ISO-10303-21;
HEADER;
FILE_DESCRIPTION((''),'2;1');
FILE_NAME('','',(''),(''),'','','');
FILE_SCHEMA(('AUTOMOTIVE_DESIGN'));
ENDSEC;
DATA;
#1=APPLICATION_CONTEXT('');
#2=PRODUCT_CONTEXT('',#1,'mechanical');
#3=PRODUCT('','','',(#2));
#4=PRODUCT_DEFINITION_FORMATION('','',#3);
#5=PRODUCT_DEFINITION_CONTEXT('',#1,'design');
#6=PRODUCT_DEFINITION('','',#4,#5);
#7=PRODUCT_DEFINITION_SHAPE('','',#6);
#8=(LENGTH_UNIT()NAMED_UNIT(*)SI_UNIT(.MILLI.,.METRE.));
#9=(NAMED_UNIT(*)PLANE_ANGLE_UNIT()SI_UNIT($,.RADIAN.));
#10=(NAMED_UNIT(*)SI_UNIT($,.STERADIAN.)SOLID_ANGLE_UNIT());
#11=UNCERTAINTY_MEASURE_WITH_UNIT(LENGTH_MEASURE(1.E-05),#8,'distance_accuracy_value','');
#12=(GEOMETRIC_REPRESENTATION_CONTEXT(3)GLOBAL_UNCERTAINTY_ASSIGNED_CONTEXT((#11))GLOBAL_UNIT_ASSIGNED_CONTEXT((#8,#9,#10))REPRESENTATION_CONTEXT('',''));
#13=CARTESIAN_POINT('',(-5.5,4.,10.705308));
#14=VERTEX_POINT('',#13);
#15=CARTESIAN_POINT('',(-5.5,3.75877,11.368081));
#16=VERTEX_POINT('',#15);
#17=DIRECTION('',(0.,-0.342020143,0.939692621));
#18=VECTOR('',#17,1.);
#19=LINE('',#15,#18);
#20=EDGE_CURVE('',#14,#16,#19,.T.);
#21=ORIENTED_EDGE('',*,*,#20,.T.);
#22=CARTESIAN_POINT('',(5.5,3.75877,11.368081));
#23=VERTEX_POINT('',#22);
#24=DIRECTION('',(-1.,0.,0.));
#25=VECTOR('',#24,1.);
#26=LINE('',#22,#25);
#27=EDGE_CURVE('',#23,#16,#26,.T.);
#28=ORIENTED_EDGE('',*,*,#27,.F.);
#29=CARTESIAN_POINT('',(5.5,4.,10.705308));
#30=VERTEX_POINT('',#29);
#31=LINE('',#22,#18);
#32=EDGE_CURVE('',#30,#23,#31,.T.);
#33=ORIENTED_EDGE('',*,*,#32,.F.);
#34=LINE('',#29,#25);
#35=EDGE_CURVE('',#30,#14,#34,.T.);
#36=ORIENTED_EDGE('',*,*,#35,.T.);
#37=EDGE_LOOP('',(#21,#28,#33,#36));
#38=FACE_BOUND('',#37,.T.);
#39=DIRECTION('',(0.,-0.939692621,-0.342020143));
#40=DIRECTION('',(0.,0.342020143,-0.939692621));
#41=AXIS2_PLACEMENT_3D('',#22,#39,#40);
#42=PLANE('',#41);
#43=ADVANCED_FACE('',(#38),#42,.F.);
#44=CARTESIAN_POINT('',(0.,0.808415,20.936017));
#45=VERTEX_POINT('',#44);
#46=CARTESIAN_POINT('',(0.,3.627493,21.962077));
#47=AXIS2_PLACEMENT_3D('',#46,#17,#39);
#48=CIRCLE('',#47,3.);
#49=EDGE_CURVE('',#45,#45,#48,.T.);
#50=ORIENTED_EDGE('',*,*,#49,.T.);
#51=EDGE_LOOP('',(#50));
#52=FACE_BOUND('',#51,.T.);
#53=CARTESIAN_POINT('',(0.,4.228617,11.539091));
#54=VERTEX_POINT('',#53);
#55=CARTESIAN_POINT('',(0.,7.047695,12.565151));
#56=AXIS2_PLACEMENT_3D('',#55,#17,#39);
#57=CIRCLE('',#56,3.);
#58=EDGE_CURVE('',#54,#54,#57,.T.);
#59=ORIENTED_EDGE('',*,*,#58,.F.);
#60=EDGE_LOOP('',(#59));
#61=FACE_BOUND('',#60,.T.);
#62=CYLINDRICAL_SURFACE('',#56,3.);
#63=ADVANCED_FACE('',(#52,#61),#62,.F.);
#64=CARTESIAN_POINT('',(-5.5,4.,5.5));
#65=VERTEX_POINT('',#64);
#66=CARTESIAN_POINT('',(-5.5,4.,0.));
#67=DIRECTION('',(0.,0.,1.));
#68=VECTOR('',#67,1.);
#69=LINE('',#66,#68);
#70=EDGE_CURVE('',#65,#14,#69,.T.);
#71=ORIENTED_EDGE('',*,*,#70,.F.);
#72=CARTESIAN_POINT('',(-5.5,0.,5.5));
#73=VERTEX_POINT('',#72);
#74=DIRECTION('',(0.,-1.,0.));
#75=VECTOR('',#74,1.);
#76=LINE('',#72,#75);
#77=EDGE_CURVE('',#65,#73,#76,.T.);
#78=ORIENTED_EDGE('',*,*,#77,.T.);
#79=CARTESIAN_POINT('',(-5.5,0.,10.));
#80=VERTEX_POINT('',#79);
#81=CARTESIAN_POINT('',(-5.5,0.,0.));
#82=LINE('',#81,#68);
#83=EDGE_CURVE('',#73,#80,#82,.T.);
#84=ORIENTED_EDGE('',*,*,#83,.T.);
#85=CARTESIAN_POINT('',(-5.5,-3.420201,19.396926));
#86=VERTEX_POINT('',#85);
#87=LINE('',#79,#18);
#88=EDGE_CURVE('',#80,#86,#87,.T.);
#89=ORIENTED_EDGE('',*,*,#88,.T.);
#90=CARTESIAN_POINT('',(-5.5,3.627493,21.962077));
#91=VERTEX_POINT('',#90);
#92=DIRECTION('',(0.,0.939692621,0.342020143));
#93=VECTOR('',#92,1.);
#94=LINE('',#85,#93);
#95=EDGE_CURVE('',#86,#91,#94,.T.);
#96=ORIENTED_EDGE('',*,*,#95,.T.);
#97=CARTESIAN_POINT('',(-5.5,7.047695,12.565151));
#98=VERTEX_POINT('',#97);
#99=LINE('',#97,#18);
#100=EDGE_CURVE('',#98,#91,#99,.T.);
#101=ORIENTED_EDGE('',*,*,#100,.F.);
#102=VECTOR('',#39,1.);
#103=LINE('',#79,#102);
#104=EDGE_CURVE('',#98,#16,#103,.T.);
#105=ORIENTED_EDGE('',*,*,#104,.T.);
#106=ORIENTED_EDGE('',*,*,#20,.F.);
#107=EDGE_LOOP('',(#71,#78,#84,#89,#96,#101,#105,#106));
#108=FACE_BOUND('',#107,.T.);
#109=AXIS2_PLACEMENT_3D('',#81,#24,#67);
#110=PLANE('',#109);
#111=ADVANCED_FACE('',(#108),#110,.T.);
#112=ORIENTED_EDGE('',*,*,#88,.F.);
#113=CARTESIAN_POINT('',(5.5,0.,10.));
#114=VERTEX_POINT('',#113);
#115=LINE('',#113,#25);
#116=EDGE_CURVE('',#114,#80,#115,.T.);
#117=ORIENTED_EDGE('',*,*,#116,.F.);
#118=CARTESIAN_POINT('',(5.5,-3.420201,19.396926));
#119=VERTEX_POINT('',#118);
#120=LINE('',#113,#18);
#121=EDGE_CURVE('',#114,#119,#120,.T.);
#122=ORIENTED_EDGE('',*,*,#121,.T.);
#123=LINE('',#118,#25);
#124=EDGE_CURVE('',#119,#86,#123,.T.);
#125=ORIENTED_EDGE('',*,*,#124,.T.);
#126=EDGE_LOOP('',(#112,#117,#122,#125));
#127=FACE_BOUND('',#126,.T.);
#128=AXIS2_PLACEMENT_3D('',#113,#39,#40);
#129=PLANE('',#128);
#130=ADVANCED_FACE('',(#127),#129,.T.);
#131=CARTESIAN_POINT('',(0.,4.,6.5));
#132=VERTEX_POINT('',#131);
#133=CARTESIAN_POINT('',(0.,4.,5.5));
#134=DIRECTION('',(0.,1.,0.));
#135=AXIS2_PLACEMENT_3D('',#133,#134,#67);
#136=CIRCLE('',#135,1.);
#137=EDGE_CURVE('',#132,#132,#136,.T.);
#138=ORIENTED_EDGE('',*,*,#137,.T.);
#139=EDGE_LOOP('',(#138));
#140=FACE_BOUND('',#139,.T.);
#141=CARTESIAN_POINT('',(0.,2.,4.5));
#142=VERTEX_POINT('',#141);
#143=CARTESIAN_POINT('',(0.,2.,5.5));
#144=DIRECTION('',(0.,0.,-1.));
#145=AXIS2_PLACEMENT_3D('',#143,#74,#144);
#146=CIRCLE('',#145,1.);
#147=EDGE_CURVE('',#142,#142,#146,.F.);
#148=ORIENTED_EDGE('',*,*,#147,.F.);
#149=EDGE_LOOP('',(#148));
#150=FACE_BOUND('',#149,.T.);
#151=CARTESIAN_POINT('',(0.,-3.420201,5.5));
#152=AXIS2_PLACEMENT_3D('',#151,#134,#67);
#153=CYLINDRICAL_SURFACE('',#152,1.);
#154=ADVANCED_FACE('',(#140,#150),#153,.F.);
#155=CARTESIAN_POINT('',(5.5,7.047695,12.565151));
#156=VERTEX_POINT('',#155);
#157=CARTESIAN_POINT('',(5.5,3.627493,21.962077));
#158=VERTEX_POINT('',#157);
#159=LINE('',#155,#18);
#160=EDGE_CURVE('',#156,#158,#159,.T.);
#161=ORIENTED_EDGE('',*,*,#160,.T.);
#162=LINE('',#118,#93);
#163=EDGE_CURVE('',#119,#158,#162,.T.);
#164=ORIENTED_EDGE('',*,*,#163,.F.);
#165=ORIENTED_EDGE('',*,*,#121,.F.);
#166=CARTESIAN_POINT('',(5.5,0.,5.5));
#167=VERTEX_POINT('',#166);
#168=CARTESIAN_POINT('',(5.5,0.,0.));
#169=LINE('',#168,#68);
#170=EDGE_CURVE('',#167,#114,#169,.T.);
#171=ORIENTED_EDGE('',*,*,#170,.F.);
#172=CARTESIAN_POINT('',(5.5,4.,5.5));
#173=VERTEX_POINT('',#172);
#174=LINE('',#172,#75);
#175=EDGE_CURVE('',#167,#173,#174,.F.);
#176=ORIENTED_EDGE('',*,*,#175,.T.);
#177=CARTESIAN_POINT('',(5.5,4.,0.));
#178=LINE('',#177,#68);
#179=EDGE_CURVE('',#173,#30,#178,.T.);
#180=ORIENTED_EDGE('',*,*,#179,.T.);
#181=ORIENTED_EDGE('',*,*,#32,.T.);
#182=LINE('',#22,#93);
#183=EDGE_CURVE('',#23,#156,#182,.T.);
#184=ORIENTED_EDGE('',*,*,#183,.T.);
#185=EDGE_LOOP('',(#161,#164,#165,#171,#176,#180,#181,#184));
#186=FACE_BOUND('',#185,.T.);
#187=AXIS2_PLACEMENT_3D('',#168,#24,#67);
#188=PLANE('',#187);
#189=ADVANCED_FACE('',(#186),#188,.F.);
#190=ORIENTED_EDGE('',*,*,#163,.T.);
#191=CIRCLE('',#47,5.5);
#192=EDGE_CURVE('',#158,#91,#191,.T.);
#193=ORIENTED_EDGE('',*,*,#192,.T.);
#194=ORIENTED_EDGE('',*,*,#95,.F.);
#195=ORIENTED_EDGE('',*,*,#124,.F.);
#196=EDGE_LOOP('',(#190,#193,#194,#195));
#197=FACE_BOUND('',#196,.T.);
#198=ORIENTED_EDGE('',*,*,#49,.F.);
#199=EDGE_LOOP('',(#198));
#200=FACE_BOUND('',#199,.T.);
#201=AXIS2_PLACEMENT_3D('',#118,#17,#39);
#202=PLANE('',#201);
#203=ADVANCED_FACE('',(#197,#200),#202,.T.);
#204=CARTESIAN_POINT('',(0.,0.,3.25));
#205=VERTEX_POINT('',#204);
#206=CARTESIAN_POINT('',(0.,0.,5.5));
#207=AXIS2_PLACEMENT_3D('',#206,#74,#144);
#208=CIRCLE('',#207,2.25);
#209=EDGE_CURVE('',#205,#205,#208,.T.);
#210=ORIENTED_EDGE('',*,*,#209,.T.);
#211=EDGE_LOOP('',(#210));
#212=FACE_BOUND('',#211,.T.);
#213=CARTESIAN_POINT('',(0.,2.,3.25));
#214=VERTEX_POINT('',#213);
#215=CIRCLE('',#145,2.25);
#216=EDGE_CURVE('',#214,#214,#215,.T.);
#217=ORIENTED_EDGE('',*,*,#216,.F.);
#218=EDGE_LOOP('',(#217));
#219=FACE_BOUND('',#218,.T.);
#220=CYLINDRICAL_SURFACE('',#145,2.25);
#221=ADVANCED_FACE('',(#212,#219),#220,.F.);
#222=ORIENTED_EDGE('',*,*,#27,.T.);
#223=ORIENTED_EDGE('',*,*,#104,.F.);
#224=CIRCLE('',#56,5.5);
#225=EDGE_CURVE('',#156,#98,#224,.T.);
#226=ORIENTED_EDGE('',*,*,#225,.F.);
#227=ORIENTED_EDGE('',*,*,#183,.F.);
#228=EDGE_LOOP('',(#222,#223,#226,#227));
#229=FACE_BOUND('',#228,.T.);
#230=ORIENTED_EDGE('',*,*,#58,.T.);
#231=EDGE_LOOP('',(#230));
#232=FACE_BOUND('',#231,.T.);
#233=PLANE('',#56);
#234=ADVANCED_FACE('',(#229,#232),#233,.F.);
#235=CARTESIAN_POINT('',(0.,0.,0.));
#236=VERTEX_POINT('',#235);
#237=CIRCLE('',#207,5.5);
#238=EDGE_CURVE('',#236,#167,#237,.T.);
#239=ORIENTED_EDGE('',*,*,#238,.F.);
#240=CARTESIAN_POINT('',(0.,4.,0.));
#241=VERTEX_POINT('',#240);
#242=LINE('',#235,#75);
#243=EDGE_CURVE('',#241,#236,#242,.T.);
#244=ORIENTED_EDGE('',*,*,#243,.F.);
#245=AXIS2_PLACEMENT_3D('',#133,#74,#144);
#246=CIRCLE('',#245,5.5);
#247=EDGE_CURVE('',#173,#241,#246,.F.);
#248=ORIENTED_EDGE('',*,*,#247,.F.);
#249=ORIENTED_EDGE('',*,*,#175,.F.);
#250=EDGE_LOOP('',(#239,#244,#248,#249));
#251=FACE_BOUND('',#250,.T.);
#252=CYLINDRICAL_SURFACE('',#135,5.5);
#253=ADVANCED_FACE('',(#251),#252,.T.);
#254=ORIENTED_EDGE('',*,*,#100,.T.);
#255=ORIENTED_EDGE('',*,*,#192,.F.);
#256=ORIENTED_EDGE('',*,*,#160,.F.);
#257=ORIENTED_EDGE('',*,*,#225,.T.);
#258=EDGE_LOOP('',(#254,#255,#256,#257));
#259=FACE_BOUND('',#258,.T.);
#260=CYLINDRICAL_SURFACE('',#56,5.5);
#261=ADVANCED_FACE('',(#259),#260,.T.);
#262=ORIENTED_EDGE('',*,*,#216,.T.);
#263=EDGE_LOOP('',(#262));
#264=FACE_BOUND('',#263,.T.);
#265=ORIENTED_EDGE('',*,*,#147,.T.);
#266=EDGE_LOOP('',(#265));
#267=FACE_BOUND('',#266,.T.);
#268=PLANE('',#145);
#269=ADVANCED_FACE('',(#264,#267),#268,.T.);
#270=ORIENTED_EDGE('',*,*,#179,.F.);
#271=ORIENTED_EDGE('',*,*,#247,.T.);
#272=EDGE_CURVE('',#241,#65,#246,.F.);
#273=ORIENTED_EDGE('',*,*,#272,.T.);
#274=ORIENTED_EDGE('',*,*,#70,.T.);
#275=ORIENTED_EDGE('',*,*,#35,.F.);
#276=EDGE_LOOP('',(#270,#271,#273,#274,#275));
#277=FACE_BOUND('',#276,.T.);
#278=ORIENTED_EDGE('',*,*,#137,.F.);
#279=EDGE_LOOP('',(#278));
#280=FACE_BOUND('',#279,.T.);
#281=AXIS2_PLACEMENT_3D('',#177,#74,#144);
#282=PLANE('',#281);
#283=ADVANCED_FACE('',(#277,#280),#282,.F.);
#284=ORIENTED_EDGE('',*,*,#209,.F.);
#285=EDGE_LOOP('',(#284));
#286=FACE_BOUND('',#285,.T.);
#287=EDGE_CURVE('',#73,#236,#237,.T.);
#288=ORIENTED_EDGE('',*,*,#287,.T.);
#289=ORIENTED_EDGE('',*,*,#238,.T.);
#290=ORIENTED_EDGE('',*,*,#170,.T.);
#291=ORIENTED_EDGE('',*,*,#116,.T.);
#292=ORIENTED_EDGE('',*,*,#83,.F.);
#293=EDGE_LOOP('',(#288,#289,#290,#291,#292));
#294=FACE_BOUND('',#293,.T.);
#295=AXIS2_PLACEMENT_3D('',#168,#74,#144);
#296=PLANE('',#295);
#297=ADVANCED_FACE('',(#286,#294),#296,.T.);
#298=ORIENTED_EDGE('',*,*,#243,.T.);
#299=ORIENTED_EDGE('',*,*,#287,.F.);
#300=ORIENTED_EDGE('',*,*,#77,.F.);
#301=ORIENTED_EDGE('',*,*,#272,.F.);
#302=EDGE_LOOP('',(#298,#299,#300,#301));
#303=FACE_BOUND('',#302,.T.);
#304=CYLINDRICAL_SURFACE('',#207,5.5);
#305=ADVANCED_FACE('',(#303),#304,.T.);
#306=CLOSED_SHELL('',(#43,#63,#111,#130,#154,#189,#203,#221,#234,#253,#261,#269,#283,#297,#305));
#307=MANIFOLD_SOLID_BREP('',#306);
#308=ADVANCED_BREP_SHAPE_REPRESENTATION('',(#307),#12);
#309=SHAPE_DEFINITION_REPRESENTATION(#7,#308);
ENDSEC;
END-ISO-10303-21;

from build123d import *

# Parameters (mm, degrees)
EXTRUDE_THIN1_DEPTH = 5.5
FILLET1_R           = 5.5
SKETCH3_R           = 1
CUT_EXTRUDE1_DEPTH  = 23.726524062
SKETCH4_R           = 2.25
CUT_EXTRUDE2_DEPTH  = 2
SKETCH5_R           = 3
BOSS_EXTRUDE1_DEPTH = 10


with BuildPart() as part:
    # Sketch2 → Extrude-Thin1 (new, symmetric)
    with BuildSketch(Plane(origin=(0, 0, 0), x_dir=(0, 0, -1), z_dir=(1, 0, 0))):
        Polygon((0, 0), (-10, 0), (-19.396926208, -3.420201433), (-20.765006781, 0.33856905), (-10.705307923, 4), (0, 4), align=None)
    extrude(amount=EXTRUDE_THIN1_DEPTH, both=True)

    # Fillet1
    fillet1_edges = [part.edges().sort_by_distance(p)[0] for p in [
        (-5.5, 2, 0),
        (5.5, 2, 0),
    ]]
    fillet(fillet1_edges, radius=FILLET1_R - 0.0001)  # a hair under: the kernel refuses the full size

    # Sketch3 → Cut-Extrude1 (cut, through all)
    with BuildSketch(Plane(origin=(0, 4, 0), x_dir=(1, 0, 0), z_dir=(0, 1, 0))):
        with Locations(Location((0, -5.5, 0), (0, 0, 270))):
            Circle(SKETCH3_R)
    extrude(amount=-CUT_EXTRUDE1_DEPTH, mode=Mode.SUBTRACT)

    # Sketch4 → Cut-Extrude2 (cut)
    with BuildSketch(Plane.XZ):
        with Locations(Location((0, 5.5, 0), (0, 0, 270))):
            Circle(SKETCH4_R)
    extrude(amount=-CUT_EXTRUDE2_DEPTH, mode=Mode.SUBTRACT)

    # Sketch5 → Boss-Extrude1 (add)
    with BuildSketch(Plane(origin=(0, -6.634139482, 18.227148423), x_dir=(1, 0, 0), z_dir=(0, -0.34202014332567143, 0.9396926207859075))):
        with BuildLine():
            Line((5.5, 7.420201433), (5.5, 10.920201433))
            ThreePointArc((5.5, 10.920201433), (0, 16.420201433), (-5.5, 10.920201433))
            Line((-5.5, 10.920201433), (-5.5, 7.420201433))
            Line((-5.5, 7.420201433), (-5.5, 3.420201433))
            Line((-5.5, 3.420201433), (5.5, 3.420201433))
            Line((5.5, 3.420201433), (5.5, 7.420201433))
        make_face()
        with Locations(Location((0, 10.920201433, 0), (0, 0, 270))):
            Circle(SKETCH5_R, mode=Mode.SUBTRACT)
    extrude(amount=-BOSS_EXTRUDE1_DEPTH)


solid = part.part
